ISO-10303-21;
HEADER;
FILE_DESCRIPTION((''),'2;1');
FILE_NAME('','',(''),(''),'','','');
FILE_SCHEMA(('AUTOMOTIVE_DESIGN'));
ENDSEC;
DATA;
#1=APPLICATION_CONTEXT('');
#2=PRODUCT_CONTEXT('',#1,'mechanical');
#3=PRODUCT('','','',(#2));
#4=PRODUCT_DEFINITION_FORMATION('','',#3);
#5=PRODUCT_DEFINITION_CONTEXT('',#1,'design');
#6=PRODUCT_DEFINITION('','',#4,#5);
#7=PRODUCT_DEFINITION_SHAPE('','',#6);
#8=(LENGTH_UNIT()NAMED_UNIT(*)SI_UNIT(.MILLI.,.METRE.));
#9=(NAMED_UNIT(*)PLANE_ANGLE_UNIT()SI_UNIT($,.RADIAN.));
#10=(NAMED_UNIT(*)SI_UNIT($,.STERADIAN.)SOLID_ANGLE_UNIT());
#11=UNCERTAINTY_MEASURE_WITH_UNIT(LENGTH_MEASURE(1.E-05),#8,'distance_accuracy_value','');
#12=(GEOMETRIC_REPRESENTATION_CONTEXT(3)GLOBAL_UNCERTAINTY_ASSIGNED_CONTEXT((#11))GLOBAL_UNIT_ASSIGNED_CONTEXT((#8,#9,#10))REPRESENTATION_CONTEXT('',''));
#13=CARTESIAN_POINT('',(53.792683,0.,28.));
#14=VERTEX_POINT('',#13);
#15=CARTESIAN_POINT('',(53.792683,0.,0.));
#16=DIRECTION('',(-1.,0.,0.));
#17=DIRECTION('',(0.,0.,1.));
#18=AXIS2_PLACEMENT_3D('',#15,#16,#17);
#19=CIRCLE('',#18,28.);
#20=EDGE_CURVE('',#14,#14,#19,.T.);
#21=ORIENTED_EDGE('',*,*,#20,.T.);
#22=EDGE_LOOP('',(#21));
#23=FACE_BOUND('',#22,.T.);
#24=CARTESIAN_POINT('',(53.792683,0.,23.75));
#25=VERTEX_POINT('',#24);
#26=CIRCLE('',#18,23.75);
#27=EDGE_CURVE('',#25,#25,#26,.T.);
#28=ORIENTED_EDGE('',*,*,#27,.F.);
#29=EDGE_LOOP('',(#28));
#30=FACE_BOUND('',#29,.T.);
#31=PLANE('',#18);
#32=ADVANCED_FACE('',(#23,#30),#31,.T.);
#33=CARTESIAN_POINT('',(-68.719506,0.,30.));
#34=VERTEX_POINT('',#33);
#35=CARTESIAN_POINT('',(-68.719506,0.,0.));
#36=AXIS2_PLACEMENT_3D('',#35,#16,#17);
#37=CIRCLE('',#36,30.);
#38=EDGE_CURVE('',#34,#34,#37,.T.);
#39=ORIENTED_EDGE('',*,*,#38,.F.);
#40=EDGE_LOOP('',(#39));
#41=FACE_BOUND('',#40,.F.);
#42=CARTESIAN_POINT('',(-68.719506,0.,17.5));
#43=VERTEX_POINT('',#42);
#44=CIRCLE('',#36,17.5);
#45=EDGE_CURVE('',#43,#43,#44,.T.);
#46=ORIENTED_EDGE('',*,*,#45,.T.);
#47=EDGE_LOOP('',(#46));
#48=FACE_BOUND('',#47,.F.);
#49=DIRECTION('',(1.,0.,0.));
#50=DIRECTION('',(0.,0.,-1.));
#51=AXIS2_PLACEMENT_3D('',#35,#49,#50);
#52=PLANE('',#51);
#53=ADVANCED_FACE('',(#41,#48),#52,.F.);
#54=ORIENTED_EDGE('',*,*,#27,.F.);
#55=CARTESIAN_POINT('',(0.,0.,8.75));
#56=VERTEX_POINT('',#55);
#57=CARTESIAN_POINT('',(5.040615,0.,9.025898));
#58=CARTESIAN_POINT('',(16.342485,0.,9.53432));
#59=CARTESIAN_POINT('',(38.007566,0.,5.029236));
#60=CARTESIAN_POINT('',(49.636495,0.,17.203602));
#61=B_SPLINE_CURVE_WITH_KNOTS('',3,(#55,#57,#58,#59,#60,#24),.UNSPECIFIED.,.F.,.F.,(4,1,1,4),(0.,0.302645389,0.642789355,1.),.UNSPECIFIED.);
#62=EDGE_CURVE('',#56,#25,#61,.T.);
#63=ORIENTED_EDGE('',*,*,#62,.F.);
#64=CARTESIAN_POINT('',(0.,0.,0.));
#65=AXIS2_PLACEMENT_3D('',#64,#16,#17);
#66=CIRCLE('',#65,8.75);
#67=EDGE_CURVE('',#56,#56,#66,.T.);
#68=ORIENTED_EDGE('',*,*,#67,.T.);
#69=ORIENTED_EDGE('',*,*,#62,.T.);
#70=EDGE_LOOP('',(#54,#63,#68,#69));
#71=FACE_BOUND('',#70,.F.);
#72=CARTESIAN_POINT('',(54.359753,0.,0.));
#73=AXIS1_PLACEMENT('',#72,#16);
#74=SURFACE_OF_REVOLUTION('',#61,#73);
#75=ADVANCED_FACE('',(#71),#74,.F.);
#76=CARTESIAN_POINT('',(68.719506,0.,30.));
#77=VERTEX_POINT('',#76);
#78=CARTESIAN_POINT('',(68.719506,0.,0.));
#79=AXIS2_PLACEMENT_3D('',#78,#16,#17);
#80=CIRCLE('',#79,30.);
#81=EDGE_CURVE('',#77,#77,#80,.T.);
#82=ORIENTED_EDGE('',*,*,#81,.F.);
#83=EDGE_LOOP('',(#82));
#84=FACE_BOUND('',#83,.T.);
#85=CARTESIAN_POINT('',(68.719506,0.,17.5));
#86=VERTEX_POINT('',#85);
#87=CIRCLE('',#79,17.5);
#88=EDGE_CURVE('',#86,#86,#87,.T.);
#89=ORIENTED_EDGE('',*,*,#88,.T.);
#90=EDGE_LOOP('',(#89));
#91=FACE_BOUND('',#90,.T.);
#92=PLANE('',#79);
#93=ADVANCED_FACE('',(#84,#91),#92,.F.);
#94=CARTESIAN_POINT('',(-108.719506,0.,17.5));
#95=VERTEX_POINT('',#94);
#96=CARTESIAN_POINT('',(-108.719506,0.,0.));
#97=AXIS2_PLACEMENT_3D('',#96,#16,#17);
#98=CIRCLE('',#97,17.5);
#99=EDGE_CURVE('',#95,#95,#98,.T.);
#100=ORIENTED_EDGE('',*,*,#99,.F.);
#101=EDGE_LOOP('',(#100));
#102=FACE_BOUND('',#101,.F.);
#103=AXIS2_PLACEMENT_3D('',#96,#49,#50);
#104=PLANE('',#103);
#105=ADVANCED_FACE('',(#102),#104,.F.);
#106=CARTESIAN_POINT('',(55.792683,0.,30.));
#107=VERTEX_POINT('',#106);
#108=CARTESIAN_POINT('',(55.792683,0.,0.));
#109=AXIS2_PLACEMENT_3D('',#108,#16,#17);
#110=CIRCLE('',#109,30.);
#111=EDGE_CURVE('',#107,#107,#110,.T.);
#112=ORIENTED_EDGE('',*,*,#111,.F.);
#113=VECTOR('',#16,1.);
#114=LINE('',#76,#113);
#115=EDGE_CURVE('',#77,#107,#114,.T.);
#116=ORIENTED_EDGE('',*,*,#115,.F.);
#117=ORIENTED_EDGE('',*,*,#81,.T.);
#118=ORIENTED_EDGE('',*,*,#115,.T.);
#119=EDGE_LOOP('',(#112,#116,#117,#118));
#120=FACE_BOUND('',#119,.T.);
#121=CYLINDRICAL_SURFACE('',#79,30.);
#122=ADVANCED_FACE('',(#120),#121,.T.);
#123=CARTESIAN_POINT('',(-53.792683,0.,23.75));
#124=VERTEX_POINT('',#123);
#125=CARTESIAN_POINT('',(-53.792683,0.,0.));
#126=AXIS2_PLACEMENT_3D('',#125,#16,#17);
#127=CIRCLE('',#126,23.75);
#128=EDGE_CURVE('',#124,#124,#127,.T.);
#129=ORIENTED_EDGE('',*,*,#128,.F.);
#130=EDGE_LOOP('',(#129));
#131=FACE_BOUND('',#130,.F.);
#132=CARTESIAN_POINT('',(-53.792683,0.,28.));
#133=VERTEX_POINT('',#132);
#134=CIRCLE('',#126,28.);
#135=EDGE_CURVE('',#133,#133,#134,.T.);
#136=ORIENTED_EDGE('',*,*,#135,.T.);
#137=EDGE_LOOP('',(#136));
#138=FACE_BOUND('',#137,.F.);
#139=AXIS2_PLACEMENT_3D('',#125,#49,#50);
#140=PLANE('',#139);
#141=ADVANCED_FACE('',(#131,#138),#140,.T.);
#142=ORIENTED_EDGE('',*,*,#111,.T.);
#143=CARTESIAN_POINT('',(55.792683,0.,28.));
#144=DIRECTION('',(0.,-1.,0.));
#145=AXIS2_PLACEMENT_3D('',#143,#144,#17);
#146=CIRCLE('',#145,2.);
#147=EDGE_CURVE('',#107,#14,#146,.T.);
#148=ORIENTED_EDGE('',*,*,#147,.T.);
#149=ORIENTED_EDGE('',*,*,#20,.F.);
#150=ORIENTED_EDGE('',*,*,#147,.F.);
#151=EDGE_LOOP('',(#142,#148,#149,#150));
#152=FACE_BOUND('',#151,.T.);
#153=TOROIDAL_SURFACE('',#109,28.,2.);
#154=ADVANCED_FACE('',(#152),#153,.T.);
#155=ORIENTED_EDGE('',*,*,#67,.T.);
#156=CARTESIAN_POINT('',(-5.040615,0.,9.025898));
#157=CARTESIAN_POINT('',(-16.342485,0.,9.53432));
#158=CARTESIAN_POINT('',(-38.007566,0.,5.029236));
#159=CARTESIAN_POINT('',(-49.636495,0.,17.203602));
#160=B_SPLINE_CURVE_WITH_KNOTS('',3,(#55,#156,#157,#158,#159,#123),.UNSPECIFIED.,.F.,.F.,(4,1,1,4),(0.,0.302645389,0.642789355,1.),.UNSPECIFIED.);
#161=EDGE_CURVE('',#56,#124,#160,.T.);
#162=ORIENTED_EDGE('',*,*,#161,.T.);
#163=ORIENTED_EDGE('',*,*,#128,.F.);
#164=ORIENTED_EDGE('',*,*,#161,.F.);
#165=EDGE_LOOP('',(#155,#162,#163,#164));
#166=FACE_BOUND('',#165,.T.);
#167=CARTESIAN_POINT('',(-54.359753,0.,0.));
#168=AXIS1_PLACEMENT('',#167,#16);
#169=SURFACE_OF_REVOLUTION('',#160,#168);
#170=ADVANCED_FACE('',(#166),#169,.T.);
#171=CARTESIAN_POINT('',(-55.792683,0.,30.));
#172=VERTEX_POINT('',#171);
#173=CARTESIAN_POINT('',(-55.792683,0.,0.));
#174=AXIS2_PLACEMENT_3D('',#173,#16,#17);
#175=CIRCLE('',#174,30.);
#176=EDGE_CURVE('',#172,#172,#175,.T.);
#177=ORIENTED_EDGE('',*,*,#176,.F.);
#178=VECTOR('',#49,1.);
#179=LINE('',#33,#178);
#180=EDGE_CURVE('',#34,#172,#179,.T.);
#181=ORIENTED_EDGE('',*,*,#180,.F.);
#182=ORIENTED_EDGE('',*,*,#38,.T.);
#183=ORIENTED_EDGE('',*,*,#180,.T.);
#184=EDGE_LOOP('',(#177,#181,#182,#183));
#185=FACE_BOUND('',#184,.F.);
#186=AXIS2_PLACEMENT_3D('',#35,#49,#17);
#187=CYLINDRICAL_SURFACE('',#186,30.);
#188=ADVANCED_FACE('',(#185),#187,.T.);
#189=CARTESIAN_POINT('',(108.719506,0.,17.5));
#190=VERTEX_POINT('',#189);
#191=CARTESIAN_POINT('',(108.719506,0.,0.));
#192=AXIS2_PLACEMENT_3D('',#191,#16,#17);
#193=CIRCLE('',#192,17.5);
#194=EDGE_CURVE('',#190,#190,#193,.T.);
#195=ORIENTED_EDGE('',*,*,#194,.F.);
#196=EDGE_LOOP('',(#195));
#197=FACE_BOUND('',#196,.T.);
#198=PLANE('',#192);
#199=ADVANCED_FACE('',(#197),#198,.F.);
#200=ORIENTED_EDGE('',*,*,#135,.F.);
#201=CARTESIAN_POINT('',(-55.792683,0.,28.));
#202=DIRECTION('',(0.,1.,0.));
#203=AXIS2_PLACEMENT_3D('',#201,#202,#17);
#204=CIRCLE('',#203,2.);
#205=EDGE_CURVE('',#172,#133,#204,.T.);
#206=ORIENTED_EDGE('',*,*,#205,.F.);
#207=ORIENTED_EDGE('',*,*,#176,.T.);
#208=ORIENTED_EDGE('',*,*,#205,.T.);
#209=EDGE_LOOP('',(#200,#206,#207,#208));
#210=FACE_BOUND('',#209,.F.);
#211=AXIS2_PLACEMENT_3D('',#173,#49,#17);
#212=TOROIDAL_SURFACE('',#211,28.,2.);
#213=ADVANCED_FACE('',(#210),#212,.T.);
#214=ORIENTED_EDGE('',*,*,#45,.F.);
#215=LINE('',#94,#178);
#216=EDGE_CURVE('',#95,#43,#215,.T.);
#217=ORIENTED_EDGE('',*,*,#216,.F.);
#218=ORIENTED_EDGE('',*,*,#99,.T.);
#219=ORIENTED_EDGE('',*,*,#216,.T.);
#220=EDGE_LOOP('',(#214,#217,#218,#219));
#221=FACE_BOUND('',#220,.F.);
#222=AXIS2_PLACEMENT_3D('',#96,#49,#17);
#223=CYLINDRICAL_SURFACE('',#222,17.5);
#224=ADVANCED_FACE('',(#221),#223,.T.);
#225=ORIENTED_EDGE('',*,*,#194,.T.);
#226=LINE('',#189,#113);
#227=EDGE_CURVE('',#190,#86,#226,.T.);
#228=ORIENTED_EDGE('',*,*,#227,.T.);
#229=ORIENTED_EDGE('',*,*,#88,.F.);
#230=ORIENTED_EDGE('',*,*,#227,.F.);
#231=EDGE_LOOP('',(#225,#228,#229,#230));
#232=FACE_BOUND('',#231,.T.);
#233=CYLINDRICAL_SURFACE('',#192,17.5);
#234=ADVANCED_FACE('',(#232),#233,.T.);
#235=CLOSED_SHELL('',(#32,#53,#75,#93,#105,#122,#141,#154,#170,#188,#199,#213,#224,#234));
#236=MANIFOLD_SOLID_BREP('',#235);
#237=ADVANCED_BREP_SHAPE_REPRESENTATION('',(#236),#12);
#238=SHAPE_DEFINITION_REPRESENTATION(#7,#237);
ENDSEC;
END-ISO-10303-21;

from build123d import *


with BuildPart() as f1:
    # F0 (on Front) → F1 (revolve)
    with BuildSketch(Plane.XZ):
        with BuildLine():
            Line((0, 8.75), (0, 0))
            Line((0, 0), (108.719505762, 0))
            Line((108.719505762, 0), (108.719505762, 17.5))
            Line((108.719505762, 17.5), (68.719505762, 17.5))
            Line((68.719505762, 17.5), (68.719505762, 30))
            Line((68.719505762, 30), (55.7926830174, 30))
            ThreePointArc((55.7926830174, 30), (54.3784694551, 29.4142135624), (53.7926830174, 28))
            Line((53.7926830174, 28), (53.7926830174, 23.75))
            add(Edge.make_bspline(
                [(0, 8.75), (5.0406153604, 9.0258980354), (16.3424850669, 9.5343195461), (38.0075656916, 5.0292358393), (49.6364947054, 17.2036020787), (53.7926830174, 23.75)],
                knots=[0, 0, 0, 0, 0.3026453885, 0.6427893554, 1, 1, 1, 1], degree=3))
        make_face()
    revolve(axis=Axis((54.359752881, 0, 0), (-1, 0, 0)))

    # F2: F1 across face


with BuildPart() as f1_1:
    add(f1.part)
    add(f1.part.mirror(Plane(origin=(0, 0, 0), x_dir=(0, -1, 0), z_dir=(-1, 0, 0))))


solid = f1_1.part
